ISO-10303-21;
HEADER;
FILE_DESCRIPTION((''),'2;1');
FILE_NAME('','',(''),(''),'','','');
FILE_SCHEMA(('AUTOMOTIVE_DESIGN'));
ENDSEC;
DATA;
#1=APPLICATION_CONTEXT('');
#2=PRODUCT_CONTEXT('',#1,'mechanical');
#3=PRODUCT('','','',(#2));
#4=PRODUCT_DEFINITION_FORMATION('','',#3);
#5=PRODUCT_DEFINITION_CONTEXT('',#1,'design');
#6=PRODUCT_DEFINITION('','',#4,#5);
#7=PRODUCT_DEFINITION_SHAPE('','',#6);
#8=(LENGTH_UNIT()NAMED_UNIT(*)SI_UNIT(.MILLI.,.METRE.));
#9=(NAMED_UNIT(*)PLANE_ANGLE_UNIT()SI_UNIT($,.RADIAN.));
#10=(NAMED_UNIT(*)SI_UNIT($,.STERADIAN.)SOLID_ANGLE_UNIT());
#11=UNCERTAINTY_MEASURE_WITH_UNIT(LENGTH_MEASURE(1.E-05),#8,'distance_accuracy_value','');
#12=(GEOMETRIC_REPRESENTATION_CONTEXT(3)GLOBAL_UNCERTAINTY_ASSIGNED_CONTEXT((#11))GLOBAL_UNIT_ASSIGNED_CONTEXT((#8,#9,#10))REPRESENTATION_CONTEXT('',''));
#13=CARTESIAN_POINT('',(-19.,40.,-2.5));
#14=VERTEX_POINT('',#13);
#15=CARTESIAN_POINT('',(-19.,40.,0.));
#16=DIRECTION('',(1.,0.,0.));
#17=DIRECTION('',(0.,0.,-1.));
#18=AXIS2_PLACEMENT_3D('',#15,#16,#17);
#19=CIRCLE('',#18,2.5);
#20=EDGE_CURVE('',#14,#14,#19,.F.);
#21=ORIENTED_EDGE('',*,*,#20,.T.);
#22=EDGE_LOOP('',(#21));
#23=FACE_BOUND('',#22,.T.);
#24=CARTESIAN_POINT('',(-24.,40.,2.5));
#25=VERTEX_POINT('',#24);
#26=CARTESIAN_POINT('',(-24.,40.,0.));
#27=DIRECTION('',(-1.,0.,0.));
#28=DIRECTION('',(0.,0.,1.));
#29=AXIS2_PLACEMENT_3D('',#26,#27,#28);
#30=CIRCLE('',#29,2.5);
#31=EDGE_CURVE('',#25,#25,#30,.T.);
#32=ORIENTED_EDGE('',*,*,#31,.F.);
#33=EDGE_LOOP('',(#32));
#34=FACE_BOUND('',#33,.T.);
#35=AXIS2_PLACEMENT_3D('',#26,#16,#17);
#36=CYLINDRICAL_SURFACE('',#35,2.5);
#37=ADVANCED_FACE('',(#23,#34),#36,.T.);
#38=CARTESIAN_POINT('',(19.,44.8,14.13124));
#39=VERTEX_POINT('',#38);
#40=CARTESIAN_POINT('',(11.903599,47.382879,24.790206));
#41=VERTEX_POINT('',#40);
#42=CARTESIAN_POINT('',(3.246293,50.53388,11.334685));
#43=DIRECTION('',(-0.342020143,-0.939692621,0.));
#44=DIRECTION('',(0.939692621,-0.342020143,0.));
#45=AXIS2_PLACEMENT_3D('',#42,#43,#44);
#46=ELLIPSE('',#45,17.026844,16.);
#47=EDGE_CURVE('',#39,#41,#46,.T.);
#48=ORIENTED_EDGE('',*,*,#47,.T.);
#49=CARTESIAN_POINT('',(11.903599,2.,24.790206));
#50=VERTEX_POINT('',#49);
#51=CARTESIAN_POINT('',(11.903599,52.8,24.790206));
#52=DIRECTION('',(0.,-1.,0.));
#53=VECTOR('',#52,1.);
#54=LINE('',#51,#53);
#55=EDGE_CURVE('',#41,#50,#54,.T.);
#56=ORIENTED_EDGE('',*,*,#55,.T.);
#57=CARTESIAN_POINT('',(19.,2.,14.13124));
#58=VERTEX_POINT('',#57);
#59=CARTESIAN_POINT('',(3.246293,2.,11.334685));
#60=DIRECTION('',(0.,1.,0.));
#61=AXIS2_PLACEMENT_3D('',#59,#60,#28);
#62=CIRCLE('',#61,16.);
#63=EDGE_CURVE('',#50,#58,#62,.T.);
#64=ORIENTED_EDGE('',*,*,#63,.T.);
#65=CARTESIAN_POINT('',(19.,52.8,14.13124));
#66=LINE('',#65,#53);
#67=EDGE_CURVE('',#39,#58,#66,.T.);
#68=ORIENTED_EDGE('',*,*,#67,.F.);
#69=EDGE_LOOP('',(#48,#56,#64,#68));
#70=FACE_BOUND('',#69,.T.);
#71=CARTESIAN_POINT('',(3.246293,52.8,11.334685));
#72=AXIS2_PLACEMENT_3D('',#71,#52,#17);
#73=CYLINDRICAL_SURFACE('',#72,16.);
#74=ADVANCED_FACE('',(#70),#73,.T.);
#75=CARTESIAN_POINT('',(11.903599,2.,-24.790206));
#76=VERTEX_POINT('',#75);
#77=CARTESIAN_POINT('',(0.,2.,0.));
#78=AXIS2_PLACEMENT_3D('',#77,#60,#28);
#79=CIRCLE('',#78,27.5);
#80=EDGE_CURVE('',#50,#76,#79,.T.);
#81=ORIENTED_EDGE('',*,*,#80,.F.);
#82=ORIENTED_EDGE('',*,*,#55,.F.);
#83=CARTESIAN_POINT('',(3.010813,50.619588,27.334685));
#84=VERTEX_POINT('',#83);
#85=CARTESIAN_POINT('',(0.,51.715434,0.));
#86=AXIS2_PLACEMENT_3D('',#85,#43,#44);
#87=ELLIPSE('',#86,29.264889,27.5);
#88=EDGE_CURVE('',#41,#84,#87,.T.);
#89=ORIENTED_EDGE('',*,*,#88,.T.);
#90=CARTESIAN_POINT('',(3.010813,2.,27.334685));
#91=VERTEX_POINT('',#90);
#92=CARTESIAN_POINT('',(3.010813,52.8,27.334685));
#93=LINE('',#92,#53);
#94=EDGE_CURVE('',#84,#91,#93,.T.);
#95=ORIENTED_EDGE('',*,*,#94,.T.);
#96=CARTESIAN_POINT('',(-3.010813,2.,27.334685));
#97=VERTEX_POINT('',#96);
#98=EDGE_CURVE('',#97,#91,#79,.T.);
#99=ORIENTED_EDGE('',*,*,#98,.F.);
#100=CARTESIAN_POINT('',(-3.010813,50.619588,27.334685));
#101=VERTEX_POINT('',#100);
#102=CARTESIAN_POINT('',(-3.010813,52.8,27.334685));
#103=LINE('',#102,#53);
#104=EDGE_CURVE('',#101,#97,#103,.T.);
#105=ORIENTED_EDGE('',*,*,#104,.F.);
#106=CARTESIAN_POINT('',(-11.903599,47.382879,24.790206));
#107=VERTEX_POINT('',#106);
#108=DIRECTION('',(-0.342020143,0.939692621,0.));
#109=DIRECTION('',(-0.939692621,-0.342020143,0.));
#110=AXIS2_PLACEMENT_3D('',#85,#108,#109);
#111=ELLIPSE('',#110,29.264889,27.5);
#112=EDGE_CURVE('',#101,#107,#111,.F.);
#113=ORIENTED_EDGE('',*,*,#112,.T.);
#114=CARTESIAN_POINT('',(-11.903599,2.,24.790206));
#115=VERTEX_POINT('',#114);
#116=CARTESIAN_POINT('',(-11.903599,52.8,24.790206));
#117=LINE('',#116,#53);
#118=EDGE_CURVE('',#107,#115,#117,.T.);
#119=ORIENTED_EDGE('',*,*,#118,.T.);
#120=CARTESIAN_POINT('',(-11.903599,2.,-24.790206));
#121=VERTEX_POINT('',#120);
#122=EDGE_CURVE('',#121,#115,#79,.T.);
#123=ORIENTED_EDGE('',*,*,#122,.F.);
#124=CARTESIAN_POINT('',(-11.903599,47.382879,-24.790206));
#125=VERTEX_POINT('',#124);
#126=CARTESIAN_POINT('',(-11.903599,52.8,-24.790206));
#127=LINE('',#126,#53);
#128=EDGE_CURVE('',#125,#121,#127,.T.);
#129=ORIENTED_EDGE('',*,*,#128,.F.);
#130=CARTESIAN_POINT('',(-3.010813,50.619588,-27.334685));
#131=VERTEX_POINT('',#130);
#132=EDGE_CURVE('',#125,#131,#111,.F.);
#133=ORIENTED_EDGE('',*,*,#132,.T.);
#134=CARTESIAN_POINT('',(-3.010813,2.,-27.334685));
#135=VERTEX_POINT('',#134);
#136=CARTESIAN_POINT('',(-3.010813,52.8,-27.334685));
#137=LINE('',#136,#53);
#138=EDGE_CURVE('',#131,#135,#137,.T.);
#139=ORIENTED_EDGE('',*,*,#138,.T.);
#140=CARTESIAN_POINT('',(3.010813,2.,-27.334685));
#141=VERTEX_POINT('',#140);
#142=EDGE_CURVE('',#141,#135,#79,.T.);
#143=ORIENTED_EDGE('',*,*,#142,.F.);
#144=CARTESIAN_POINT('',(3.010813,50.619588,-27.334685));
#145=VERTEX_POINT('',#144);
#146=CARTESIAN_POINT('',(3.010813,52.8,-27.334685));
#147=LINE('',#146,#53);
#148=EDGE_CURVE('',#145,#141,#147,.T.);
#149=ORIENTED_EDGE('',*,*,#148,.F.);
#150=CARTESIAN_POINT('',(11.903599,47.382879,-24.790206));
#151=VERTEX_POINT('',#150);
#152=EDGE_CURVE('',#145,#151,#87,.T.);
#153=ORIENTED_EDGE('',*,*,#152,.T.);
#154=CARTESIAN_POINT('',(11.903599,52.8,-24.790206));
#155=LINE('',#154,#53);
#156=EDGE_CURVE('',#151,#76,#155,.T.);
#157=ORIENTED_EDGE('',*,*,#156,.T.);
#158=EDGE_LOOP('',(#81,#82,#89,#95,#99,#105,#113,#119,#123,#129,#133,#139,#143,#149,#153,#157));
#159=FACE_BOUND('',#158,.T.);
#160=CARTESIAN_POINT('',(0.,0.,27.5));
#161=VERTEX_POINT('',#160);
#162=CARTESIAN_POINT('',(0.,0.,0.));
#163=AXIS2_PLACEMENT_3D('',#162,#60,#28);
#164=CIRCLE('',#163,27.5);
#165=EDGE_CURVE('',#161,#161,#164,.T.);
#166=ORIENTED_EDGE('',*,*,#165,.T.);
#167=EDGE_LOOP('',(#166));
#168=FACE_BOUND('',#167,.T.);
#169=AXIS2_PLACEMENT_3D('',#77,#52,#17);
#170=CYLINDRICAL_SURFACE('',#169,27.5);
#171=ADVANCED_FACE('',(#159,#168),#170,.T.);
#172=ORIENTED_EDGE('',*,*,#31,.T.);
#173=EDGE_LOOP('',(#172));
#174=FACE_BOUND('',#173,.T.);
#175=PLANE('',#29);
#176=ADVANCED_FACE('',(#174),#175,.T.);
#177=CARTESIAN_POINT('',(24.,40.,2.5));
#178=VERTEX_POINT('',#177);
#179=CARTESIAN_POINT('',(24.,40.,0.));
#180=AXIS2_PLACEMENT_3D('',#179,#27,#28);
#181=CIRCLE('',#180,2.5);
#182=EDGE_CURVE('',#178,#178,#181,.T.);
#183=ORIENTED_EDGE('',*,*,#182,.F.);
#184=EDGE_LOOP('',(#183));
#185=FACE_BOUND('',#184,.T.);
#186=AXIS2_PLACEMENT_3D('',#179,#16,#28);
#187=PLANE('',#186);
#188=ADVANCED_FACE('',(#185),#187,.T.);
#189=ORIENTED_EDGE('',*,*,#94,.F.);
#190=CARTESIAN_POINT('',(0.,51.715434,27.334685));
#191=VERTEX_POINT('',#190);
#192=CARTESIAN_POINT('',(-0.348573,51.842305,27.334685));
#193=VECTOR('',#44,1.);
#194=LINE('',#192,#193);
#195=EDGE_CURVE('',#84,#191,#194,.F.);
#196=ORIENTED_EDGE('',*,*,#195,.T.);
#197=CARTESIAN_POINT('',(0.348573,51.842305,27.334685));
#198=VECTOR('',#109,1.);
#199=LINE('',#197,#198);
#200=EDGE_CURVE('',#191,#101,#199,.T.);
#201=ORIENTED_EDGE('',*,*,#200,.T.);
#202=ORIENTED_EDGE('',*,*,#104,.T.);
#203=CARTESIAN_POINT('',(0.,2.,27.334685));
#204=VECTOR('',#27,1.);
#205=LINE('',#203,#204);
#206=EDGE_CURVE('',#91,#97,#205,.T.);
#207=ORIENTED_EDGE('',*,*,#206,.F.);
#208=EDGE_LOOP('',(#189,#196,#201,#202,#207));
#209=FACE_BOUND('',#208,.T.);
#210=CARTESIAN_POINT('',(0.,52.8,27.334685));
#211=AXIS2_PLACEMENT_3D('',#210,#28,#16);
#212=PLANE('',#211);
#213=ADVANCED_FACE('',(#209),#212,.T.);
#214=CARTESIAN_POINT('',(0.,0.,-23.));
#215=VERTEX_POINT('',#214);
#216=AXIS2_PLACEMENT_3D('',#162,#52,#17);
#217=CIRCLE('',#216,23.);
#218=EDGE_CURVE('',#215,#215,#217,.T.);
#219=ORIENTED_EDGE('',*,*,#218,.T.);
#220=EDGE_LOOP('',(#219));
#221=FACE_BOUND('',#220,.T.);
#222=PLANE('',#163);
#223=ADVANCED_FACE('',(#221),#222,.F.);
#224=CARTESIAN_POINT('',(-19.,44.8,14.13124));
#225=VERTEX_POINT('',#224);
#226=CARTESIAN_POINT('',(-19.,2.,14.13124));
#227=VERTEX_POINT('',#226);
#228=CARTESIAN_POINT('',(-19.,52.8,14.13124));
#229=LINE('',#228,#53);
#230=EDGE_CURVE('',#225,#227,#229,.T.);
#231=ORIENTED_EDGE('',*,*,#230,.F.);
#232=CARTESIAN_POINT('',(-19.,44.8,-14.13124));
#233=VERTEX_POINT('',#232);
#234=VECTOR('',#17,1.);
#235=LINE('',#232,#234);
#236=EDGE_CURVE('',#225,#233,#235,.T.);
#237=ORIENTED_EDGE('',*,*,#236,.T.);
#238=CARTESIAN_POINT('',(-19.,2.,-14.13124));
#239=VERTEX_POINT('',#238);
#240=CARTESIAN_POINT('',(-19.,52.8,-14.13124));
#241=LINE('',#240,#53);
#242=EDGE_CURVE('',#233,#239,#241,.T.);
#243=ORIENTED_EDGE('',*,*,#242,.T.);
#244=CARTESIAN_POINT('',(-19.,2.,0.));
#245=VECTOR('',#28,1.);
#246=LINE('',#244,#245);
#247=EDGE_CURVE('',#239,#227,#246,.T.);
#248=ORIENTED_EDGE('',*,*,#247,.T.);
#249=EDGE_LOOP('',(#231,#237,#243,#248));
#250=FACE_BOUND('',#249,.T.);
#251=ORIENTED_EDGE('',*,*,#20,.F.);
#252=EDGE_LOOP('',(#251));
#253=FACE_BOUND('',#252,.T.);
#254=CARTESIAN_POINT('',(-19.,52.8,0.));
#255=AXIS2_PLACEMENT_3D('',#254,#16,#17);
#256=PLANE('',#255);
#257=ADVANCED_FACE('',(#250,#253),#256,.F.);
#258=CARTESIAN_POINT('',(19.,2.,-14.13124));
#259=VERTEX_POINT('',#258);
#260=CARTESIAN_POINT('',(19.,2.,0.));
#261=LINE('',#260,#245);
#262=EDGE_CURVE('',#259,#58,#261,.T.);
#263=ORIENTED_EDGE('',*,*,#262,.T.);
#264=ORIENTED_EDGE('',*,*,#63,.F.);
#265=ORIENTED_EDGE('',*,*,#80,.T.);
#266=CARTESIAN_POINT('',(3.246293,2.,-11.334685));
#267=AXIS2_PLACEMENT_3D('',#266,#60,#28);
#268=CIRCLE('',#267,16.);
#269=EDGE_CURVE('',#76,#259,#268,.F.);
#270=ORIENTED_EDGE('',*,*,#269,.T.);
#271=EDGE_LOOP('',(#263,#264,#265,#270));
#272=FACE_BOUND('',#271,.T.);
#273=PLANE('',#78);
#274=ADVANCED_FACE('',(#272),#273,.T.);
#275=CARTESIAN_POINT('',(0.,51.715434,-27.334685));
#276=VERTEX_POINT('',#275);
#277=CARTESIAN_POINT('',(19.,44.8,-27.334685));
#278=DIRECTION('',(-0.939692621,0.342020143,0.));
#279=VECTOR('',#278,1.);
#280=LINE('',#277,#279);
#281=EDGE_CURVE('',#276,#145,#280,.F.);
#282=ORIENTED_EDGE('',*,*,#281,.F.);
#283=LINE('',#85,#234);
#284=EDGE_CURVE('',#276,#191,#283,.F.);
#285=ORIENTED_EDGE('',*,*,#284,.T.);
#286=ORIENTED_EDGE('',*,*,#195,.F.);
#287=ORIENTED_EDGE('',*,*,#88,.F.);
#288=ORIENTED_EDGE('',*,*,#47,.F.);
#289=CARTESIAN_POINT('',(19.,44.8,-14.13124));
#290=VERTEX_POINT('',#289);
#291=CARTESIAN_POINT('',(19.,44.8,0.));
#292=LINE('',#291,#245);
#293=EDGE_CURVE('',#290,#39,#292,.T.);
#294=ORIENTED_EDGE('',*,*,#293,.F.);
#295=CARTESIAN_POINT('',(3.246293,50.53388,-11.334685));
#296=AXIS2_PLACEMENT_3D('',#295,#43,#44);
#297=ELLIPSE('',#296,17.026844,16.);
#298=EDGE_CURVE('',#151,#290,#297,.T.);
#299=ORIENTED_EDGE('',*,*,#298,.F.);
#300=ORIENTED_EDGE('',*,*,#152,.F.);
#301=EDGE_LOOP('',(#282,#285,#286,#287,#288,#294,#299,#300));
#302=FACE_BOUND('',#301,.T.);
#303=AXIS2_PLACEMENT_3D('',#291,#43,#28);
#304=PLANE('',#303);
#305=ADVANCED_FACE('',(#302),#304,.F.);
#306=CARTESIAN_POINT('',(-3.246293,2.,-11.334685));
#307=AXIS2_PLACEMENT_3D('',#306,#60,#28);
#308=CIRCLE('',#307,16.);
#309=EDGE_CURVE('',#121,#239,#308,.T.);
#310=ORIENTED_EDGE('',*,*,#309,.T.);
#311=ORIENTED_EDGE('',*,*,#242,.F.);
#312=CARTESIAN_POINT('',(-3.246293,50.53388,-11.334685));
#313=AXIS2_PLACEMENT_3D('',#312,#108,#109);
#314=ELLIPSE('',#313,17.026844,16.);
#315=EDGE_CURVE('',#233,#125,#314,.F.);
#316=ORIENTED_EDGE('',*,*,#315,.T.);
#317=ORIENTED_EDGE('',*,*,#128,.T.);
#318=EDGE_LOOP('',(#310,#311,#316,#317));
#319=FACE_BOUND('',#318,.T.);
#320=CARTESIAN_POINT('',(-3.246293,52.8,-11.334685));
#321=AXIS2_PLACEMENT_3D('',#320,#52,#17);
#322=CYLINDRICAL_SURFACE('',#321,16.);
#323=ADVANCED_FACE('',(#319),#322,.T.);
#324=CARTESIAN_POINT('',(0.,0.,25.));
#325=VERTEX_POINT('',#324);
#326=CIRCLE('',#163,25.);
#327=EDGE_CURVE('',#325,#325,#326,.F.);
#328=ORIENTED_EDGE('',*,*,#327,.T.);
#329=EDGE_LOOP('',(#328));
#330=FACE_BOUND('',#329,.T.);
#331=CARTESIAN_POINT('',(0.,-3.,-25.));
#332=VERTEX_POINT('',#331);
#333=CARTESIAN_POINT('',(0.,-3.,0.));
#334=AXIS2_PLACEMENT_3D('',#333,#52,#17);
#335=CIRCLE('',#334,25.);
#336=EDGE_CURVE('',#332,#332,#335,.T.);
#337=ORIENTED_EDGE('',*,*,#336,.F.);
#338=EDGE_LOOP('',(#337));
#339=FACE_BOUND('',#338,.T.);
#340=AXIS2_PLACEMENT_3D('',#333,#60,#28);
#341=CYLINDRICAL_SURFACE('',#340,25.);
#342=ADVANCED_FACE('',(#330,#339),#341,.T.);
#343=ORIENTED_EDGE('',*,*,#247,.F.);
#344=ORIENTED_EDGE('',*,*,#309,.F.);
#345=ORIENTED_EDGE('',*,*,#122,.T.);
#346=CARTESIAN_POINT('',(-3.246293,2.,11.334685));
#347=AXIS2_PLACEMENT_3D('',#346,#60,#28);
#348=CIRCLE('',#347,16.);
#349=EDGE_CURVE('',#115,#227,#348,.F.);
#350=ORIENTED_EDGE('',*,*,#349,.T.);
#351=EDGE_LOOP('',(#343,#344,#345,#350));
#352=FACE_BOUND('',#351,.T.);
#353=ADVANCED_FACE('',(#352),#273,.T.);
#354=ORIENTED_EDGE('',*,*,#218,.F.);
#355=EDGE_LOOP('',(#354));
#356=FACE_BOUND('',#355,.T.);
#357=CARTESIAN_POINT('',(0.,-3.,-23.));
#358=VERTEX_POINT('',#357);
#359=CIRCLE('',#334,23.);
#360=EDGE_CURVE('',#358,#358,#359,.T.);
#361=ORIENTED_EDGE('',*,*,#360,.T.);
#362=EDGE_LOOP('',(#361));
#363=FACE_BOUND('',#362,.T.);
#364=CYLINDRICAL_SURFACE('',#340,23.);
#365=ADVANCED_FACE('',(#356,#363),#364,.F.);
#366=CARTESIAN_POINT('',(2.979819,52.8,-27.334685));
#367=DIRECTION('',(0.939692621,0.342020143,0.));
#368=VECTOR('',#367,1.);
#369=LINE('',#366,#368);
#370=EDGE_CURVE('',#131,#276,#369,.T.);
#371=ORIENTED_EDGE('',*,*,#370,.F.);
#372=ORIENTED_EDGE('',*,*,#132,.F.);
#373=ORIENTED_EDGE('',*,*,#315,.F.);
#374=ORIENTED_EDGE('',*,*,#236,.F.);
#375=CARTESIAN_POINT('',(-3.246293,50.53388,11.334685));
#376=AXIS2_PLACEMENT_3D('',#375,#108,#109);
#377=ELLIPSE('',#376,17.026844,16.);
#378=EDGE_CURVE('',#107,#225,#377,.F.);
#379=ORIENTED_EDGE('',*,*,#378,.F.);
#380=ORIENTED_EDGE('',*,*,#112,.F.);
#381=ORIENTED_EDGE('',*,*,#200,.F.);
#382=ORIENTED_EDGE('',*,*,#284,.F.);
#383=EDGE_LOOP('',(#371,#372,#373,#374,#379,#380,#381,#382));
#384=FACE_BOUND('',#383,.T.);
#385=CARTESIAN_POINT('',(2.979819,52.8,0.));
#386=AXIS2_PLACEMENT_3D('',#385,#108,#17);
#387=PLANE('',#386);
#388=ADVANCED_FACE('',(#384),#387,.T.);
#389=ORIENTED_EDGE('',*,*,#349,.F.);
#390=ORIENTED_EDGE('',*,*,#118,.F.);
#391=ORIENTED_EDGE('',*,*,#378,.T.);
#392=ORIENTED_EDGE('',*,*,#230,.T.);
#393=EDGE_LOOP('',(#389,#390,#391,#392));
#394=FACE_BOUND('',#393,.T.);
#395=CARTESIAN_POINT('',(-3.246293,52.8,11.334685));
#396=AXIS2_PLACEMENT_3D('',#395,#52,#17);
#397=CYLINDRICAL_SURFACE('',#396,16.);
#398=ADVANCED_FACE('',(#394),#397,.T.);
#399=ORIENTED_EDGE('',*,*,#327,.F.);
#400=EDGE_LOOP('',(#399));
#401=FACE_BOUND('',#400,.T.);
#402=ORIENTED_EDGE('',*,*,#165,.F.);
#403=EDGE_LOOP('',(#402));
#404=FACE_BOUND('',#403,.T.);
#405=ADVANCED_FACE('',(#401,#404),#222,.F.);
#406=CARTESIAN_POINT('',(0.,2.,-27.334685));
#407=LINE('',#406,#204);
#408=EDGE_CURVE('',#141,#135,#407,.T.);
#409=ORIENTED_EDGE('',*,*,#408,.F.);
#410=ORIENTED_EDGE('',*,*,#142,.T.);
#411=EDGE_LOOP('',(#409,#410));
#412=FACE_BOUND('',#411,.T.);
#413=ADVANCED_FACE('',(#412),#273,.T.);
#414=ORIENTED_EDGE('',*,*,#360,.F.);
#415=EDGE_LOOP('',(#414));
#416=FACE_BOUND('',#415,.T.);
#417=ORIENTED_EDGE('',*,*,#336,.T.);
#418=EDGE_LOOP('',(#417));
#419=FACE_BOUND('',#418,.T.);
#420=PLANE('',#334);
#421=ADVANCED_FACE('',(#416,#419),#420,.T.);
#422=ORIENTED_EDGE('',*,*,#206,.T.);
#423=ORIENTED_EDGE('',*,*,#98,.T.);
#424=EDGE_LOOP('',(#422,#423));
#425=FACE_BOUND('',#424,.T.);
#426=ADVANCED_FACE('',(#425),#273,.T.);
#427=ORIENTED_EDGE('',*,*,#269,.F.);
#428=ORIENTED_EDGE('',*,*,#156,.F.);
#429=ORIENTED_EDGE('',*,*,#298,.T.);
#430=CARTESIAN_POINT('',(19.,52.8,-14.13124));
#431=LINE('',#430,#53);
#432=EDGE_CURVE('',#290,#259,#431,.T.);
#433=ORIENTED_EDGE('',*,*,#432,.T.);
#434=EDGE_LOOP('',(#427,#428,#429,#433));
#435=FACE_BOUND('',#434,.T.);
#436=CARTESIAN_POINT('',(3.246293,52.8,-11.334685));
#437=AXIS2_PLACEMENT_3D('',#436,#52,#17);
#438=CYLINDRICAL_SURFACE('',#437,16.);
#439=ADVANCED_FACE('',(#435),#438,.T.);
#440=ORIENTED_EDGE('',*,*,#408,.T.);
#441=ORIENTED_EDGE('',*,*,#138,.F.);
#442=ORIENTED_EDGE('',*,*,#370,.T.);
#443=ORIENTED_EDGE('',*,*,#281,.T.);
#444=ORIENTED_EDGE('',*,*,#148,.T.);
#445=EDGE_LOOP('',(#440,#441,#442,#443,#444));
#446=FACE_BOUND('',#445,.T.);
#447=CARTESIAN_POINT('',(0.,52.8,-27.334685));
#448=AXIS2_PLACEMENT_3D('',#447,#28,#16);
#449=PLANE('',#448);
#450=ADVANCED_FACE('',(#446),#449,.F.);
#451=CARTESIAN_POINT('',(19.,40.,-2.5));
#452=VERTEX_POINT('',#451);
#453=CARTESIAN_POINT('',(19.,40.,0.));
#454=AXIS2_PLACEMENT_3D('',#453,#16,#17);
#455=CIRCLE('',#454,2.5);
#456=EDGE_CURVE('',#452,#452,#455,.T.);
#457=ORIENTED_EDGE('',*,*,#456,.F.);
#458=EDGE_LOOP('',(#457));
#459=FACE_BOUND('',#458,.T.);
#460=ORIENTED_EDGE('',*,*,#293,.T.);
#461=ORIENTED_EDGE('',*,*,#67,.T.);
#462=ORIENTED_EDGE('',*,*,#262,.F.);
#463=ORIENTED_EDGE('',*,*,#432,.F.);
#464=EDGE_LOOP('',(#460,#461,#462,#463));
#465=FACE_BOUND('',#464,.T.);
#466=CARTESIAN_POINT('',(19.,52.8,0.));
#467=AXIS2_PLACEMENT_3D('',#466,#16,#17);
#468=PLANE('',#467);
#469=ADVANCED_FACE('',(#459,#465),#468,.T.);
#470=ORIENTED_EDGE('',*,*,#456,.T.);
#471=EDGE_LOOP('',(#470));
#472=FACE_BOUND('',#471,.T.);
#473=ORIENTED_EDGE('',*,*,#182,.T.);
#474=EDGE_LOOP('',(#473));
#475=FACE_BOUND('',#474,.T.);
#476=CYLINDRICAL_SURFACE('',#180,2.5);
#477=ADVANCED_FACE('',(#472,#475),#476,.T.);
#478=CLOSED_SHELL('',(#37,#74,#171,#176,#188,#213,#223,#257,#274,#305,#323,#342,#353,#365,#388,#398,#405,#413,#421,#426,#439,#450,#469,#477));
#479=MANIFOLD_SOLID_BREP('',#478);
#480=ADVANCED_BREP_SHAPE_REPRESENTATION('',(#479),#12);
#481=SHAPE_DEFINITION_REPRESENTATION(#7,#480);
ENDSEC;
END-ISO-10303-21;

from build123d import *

# Parameters (mm, degrees)
SKETCH1_R           = 27.5
BOSS_EXTRUDE1_DEPTH = 2
SKETCH2_R           = 25
SKETCH2_R_2         = 23
BOSS_EXTRUDE2_DEPTH = 3
BOSS_EXTRUDE3_DEPTH = 50.8
CHAMFER1_SIZE       = 21.979819356
CHAMFER1_SIZE_2     = 8
SKETCH4_R           = 2.5
BOSS_EXTRUDE4_DEPTH = 5


with BuildPart() as part:
    # Sketch1 → Boss-Extrude1 (new body)
    with BuildSketch(Plane(origin=(0, 0, 0), x_dir=(1, 0, 0), z_dir=(0, 1, 0))):
        with Locations(Location((0, 0, 0), (0, 0, 270))):
            Circle(SKETCH1_R)
    extrude(amount=BOSS_EXTRUDE1_DEPTH)

    # Sketch2 → Boss-Extrude2 (add)
    with BuildSketch(Plane.XZ):
        with Locations(Location((0, 0, 0), (0, 0, 90))):
            Circle(SKETCH2_R)
        with Locations(Location((0, 0, 0), (0, 0, 270))):
            Circle(SKETCH2_R_2, mode=Mode.SUBTRACT)
    extrude(amount=BOSS_EXTRUDE2_DEPTH)

    # Sketch3 → Boss-Extrude3 (add)
    with BuildSketch(Plane(origin=(0, 2, 0), x_dir=(1, 0, 0), z_dir=(0, 1, 0))):
        with BuildLine():
            ThreePointArc((-11.903598775, 24.790206457), (-16.564617944, 20.201602313), (-19, 14.131239727))
            Line((-19, 14.131239727), (-19, -14.131239727))
            ThreePointArc((-19, -14.131239727), (-16.564617944, -20.201602313), (-11.903598775, -24.790206457))
            ThreePointArc((-11.903598775, -24.790206457), (-7.564953068, -26.43901445), (-3.010813341, -27.334684981))
            Line((-3.010813341, -27.334684981), (3.010813341, -27.334684981))
            ThreePointArc((3.010813341, -27.334684981), (7.564953068, -26.43901445), (11.903598775, -24.790206457))
            ThreePointArc((11.903598775, -24.790206457), (16.564617944, -20.201602313), (19, -14.131239727))
            Line((19, -14.131239727), (19, 14.131239727))
            ThreePointArc((19, 14.131239727), (16.564617944, 20.201602313), (11.903598775, 24.790206457))
            ThreePointArc((11.903598775, 24.790206457), (7.564953068, 26.43901445), (3.010813341, 27.334684981))
            Line((3.010813341, 27.334684981), (-3.010813341, 27.334684981))
            ThreePointArc((-3.010813341, 27.334684981), (-7.564953068, 26.43901445), (-11.903598775, 24.790206457))
        make_face()
    extrude(amount=BOSS_EXTRUDE3_DEPTH)

    # Chamfer1
    # the kernel refuses this chamfer: 21.979819356, 8 mm, written as the material it takes off along each edge
    with BuildSketch(Plane(origin=(19, 52.8, 71.151171322), x_dir=(-0.9999130865277316, 0.013184058198645697, 0), z_dir=(0, 0, -1)), Plane(origin=(-19, 52.8, -71.151171322), x_dir=(0.9999130865277316, 0.013184058198645697, 0), z_dir=(0, 0, 1))) as chamfer1_piece_1:
        Polygon((CHAMFER1_SIZE * 0.999913086511, -CHAMFER1_SIZE * 0.0131840581984), (-CHAMFER1_SIZE_2 * 0.0131840581986, -CHAMFER1_SIZE_2 * 0.999913086528), (0, 0), align=None)
    extrude(amount=142.302342643, mode=Mode.SUBTRACT)

    # Sketch4 → Boss-Extrude4 (add)
    with BuildSketch(Plane.ZY.offset(19)):
        with Locations(Location((0, 40, 0), (0, 0, 180))):
            Circle(SKETCH4_R)
    boss_extrude4 = extrude(amount=BOSS_EXTRUDE4_DEPTH)

    # Mirror1: Boss-Extrude4 across plane
    add(boss_extrude4.mirror(Plane(origin=(0, 0, 0), x_dir=(0, 0, 1), z_dir=(1, 0, 0))))


solid = part.part
